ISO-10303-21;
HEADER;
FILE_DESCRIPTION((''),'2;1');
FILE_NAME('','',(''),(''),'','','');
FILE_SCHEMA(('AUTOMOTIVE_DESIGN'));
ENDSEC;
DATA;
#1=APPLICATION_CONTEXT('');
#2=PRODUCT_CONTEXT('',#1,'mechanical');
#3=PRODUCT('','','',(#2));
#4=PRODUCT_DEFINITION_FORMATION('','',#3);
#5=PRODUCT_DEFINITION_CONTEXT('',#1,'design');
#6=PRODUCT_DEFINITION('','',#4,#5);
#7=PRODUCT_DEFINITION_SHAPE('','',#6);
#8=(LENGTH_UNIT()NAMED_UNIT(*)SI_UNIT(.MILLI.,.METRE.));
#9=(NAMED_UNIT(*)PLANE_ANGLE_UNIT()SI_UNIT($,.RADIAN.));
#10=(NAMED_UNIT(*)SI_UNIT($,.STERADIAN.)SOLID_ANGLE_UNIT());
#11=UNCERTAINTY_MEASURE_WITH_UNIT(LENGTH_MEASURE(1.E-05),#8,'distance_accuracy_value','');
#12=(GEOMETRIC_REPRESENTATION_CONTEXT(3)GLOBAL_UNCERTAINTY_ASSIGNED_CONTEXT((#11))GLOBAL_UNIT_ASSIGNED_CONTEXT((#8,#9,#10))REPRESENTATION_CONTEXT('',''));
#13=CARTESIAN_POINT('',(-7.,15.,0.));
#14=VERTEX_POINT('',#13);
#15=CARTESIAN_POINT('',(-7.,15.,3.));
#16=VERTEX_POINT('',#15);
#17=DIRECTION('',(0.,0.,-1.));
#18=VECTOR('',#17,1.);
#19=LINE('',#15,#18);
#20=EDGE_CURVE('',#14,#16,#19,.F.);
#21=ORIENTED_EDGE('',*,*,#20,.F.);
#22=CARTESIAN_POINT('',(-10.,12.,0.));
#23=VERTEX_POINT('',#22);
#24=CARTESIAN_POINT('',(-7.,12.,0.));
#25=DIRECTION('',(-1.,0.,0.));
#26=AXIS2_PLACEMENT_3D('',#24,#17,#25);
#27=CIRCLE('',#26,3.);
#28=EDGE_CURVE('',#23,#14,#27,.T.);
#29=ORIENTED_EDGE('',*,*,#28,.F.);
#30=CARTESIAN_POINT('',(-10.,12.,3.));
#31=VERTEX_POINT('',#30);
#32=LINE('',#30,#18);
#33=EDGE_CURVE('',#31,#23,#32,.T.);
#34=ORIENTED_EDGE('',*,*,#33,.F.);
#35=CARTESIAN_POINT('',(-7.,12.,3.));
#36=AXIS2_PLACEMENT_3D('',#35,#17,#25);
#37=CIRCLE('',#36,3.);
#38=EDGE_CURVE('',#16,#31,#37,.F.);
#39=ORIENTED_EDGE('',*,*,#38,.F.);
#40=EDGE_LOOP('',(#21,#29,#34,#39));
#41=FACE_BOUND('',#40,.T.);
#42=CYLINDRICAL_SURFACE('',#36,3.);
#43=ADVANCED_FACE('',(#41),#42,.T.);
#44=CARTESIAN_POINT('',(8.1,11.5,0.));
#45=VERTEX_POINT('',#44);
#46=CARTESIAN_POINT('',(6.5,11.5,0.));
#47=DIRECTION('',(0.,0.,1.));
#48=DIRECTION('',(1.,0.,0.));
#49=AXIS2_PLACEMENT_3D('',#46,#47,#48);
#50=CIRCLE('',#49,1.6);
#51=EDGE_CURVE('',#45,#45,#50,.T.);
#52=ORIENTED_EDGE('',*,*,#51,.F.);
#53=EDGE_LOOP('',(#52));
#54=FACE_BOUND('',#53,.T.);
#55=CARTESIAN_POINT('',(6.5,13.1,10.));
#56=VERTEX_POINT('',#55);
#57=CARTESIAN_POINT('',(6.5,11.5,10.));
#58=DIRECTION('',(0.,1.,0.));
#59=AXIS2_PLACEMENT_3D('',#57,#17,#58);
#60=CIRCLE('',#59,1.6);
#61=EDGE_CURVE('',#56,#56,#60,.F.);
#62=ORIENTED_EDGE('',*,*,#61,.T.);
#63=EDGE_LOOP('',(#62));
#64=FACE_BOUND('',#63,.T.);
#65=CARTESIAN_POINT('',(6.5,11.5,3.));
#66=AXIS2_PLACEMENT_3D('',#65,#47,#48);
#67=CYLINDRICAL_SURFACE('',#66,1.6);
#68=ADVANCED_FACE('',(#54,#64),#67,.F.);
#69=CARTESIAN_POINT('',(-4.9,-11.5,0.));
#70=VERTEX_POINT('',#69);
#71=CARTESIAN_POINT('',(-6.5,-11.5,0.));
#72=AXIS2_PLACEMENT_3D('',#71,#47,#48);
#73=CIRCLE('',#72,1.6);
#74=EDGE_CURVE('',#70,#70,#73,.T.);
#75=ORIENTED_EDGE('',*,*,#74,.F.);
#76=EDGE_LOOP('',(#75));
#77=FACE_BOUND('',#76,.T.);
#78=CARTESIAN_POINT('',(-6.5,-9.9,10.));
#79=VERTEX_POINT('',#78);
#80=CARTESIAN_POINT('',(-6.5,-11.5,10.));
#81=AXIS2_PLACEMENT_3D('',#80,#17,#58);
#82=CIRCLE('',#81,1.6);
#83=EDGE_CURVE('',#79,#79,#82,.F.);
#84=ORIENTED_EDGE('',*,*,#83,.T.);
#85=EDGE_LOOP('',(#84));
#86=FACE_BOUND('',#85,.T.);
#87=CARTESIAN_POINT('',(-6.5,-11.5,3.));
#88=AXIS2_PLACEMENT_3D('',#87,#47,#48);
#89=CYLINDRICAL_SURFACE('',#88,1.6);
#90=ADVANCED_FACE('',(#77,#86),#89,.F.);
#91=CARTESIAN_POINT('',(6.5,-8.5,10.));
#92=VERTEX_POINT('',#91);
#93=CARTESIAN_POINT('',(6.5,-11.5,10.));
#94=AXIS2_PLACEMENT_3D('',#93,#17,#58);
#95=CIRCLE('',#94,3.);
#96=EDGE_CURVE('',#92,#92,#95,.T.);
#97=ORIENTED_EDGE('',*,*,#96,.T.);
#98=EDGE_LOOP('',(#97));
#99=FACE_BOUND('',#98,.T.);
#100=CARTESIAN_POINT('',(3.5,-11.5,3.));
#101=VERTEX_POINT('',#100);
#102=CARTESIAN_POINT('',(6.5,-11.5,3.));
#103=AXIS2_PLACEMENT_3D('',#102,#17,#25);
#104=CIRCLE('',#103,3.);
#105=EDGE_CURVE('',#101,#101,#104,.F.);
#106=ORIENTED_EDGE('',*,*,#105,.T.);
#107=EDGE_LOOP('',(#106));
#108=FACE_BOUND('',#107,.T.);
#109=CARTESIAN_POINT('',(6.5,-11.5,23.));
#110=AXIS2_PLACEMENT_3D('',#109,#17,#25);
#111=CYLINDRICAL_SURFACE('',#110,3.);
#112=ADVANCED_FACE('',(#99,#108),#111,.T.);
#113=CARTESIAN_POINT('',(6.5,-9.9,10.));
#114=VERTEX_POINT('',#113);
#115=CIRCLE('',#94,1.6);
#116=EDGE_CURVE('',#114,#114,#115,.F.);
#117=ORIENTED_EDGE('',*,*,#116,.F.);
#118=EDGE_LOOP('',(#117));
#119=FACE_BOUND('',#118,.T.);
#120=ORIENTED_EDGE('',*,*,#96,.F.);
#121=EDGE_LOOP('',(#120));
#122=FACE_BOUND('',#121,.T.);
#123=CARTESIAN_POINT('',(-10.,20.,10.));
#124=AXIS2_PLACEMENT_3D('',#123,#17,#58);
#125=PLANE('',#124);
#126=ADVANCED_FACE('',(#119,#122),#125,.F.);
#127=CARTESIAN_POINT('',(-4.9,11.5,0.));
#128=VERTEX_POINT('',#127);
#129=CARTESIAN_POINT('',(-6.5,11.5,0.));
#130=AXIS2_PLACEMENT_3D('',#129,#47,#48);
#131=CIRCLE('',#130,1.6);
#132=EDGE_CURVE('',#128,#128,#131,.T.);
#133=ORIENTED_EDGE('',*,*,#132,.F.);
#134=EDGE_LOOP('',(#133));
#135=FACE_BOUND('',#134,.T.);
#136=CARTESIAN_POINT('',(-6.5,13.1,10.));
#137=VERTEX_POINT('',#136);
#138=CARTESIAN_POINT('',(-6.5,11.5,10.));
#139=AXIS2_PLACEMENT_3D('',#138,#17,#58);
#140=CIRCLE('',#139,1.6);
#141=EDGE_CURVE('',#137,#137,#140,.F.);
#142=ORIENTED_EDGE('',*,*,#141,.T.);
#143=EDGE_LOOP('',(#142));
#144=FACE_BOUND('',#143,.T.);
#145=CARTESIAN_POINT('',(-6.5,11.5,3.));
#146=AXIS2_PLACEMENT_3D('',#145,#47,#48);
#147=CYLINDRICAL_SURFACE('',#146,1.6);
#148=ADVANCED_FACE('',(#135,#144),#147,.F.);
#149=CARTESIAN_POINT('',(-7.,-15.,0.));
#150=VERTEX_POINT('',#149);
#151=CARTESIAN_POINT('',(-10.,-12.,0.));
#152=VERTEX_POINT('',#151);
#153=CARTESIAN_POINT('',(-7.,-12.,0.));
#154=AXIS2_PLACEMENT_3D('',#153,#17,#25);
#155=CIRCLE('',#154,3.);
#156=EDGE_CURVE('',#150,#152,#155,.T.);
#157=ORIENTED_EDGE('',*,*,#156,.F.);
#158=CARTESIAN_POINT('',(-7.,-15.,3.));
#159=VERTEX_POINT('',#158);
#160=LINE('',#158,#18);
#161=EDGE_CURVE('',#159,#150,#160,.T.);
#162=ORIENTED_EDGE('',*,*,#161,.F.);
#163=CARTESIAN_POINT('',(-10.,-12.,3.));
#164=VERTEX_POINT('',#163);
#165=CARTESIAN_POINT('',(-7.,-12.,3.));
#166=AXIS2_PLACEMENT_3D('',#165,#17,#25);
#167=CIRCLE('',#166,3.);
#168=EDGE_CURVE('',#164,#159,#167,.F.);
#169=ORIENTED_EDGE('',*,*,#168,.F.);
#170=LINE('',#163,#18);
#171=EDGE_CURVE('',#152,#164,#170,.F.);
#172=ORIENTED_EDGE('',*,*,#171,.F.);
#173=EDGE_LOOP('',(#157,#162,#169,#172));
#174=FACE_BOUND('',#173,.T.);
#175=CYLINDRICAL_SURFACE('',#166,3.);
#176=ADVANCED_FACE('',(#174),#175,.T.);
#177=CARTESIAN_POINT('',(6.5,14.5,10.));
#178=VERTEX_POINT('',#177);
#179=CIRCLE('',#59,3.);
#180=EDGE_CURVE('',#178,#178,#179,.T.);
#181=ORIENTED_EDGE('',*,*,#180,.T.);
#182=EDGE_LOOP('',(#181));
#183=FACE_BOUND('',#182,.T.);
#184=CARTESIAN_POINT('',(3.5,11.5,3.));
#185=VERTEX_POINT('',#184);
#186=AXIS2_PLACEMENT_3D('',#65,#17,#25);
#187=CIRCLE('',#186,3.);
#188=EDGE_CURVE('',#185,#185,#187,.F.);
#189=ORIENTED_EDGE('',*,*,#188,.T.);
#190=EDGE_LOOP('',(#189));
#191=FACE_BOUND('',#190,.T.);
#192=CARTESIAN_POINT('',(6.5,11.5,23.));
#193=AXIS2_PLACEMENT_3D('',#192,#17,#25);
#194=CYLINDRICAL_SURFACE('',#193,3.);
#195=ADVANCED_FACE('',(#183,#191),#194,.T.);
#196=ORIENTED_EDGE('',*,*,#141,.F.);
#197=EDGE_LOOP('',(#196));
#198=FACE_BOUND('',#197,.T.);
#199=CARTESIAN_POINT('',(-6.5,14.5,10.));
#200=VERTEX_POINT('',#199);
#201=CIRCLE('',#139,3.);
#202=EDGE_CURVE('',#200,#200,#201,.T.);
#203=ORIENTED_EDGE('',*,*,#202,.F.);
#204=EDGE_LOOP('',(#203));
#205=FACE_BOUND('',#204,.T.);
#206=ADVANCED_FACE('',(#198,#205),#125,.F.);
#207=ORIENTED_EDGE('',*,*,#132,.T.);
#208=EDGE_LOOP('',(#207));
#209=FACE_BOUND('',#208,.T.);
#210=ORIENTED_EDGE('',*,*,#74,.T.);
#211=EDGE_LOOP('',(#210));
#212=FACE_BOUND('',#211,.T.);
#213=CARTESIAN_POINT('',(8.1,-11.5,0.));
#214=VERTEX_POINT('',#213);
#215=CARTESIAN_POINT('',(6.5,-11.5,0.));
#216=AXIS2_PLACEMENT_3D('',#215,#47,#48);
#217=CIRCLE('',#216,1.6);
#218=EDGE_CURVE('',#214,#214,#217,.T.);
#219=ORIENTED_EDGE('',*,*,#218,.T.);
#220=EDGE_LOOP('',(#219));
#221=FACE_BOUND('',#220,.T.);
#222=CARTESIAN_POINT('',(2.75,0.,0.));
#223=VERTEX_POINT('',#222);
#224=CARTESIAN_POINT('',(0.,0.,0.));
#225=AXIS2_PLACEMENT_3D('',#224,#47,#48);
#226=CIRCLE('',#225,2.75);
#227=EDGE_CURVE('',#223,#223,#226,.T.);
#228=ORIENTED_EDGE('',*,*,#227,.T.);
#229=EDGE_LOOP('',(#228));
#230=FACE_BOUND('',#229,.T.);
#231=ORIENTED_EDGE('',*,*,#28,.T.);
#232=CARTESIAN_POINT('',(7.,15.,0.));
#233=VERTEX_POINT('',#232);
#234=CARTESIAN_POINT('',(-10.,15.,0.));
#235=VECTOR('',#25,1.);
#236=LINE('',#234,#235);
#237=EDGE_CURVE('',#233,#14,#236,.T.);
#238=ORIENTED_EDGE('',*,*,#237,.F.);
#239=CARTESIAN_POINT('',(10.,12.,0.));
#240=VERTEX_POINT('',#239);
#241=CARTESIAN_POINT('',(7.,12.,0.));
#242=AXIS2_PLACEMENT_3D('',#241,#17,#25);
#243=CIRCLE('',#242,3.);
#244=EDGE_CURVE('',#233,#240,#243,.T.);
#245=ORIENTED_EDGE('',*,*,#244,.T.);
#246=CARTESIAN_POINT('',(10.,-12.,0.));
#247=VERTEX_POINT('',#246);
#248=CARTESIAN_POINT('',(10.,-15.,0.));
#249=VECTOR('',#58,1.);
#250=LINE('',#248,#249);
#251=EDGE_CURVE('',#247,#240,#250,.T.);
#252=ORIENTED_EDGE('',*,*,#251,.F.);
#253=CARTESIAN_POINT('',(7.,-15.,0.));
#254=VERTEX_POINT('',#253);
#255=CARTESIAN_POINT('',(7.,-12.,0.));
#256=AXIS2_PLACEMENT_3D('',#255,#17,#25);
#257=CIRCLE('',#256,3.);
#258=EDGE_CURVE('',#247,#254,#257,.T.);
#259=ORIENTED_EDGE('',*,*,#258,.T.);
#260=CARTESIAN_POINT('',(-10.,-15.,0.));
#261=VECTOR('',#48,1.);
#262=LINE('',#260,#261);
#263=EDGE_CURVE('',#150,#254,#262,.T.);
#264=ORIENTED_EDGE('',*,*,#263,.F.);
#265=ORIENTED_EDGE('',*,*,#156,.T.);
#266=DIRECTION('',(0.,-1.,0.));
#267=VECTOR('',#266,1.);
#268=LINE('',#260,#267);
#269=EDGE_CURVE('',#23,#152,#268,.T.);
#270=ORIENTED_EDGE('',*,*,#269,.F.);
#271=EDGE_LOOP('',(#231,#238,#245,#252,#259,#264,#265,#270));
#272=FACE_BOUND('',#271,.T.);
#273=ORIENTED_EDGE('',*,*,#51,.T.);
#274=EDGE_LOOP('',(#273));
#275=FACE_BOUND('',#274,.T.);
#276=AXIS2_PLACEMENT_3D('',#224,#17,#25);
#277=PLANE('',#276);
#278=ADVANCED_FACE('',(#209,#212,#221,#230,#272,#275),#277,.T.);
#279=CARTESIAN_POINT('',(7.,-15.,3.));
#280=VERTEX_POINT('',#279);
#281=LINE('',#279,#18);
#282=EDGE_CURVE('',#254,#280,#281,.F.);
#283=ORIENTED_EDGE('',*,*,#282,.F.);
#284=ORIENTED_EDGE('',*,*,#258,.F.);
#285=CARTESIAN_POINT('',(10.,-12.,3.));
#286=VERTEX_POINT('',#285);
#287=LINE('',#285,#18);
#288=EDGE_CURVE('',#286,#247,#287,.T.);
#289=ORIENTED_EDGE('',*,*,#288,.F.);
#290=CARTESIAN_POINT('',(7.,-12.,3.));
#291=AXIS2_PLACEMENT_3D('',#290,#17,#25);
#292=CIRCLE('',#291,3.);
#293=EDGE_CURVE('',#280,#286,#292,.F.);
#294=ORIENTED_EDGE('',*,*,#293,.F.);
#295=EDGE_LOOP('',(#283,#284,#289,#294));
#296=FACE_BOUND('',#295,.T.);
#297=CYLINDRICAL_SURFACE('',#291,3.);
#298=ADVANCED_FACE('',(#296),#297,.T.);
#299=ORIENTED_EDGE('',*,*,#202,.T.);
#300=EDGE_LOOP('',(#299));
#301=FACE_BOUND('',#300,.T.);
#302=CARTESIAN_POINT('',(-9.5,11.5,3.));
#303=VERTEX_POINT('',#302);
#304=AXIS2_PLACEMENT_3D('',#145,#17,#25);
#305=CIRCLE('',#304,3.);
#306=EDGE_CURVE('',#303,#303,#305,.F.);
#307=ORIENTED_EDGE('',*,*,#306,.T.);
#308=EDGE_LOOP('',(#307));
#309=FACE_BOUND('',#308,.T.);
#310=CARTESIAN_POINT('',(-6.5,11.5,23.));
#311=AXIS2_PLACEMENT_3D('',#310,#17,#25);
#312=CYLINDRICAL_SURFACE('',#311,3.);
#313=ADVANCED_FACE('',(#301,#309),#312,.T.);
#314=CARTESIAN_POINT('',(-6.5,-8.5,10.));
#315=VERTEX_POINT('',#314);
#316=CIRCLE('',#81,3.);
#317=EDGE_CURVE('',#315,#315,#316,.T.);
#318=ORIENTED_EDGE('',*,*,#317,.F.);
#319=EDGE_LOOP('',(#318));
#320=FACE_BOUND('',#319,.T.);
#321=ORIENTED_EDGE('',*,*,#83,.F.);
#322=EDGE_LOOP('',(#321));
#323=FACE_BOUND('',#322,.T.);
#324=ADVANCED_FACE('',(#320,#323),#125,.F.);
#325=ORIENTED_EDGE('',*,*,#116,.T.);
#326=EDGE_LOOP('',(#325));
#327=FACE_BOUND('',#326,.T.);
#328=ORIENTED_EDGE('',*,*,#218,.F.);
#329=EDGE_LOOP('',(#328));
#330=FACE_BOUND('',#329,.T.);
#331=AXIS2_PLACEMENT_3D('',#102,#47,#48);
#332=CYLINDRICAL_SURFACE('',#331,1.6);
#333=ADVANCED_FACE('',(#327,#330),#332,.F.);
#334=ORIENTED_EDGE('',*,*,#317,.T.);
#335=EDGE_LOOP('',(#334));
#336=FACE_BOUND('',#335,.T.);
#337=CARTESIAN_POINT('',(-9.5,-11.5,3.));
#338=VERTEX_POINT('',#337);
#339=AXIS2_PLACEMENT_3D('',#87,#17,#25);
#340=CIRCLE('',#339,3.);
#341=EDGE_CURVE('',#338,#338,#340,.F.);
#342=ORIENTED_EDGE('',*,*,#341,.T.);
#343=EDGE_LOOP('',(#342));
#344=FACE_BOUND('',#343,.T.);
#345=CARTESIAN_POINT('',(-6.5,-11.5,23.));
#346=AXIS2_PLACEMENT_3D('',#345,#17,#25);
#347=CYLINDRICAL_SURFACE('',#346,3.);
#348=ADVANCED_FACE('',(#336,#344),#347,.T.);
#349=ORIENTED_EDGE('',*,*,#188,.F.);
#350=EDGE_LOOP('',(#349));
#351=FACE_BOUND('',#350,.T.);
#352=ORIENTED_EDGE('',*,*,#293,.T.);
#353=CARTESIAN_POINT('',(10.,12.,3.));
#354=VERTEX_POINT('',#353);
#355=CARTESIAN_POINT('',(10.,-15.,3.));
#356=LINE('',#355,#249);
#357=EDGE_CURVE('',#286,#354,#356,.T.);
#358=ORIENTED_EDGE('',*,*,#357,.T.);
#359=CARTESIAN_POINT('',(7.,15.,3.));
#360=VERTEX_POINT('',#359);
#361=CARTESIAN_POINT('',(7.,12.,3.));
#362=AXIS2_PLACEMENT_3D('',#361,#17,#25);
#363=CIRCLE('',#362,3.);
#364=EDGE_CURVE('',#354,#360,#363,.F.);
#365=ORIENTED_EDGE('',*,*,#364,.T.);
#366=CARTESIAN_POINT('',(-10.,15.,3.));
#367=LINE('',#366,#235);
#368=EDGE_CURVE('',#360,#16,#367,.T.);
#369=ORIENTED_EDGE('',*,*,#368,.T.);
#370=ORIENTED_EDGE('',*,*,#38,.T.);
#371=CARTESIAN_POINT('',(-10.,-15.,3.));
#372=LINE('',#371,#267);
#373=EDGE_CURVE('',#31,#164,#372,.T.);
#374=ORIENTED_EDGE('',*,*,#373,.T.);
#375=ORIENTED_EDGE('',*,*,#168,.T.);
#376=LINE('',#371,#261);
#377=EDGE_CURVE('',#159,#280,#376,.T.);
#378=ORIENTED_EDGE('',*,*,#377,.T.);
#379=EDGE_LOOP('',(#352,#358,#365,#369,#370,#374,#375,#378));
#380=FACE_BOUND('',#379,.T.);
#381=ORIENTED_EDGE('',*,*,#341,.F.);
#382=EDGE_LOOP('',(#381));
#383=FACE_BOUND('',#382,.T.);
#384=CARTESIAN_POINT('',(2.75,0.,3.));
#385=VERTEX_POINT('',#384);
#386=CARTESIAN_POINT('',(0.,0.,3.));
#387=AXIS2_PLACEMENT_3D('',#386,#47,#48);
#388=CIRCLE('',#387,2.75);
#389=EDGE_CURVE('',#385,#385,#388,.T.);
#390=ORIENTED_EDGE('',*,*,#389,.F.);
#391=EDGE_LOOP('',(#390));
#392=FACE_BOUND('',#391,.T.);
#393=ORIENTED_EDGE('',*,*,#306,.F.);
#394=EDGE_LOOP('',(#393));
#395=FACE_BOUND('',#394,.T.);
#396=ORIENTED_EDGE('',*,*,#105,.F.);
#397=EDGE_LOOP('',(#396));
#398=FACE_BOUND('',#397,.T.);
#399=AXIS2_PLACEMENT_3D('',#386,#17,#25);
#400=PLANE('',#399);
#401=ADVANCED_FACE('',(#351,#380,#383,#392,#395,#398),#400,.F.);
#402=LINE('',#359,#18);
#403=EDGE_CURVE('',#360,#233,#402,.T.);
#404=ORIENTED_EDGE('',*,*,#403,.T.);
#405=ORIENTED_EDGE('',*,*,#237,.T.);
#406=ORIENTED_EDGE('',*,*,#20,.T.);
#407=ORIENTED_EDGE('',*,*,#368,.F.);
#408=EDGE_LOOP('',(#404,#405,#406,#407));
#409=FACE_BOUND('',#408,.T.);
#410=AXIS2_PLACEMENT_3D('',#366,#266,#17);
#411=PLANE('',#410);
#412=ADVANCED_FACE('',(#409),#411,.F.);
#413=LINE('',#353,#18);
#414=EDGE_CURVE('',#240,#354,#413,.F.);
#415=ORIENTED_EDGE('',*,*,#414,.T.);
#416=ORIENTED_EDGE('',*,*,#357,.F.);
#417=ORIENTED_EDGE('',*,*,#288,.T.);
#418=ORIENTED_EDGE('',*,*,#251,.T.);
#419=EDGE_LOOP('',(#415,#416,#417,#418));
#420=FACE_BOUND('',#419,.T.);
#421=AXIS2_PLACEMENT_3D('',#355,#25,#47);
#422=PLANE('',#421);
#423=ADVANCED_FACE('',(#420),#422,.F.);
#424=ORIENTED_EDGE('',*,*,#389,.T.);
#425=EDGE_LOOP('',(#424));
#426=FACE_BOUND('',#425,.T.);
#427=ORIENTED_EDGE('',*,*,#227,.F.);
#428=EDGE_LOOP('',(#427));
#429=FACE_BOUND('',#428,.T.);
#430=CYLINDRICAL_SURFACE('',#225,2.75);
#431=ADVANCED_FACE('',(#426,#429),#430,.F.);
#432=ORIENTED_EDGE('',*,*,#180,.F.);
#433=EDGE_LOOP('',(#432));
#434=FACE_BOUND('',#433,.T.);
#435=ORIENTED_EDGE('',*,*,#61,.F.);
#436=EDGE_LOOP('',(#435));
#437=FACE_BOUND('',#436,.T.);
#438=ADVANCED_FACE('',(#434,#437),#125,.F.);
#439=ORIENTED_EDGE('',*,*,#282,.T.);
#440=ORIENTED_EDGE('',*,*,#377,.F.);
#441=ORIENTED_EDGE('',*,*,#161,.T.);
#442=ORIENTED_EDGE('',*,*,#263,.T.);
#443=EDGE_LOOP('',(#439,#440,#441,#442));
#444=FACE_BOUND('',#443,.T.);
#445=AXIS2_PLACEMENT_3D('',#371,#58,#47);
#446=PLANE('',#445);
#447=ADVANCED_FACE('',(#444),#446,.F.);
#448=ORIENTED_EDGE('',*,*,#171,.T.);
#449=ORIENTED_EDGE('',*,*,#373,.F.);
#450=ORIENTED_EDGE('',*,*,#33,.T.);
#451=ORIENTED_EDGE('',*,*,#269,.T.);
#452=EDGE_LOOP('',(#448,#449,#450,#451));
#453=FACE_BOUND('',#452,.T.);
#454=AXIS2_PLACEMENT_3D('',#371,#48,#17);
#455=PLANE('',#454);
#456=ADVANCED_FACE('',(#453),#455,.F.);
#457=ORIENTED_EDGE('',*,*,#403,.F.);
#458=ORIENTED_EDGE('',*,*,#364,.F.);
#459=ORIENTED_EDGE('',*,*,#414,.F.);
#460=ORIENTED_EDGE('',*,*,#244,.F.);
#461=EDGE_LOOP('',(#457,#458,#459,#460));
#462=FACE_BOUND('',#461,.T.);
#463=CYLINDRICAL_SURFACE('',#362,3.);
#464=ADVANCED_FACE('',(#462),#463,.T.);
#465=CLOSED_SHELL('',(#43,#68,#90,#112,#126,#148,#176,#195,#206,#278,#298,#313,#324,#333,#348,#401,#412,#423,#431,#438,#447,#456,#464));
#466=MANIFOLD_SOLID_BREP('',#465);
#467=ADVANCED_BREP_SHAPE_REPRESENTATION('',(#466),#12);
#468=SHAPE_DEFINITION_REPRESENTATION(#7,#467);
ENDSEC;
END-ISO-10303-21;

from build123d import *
from build123d.topology import SkipClean

# Parameters (mm, degrees)
SKETCH1_W                  = 20
SKETCH1_H                  = 30
BOSS_EXTRUDE1_DEPTH        = 3
F_3_2_3_2_DIAMETER_HOLE1_D = 3.2
SKETCH5_R                  = 3
SKETCH5_R_2                = 1.6
BOSS_EXTRUDE2_DEPTH        = 20
SKETCH6_R                  = 2.75
CUT_EXTRUDE1_DEPTH         = 27.925824036
SKETCH7_W                  = 20
SKETCH7_H                  = 40
CUT_EXTRUDE2_DEPTH         = 34.970575503
FILLET1_R                  = 3


with BuildPart() as part:
    # Sketch1 → Boss-Extrude1 (new body)
    with BuildSketch(Plane.XY):
        Rectangle(SKETCH1_W, SKETCH1_H)
    extrude(amount=BOSS_EXTRUDE1_DEPTH)

    # Ø3.2 (3.2) Diameter Hole1 (through all)
    with Locations(Plane.XY.offset(3)):
        with Locations((-6.5, 11.5), (6.5, 11.5), (6.5, -11.5), (-6.5, -11.5)):
            Hole(F_3_2_3_2_DIAMETER_HOLE1_D / 2)

    # Sketch5 → Boss-Extrude2 (add)
    # profile 1 of 4: a face of its own
    with SkipClean():  # the faces are left unmerged after this step: merging them gives an invalid solid
        with BuildSketch(Plane.XY.offset(3)):
            with Locations((-6.5, 11.5)):
                Circle(SKETCH5_R)
            with Locations((-6.5, 11.5)):
                Circle(SKETCH5_R_2, mode=Mode.SUBTRACT)
        # profile 2 of 4: a face of its own
        with BuildSketch(Plane.XY.offset(3)):
            with Locations((6.5, 11.5)):
                Circle(SKETCH5_R)
            with Locations((6.5, 11.5)):
                Circle(SKETCH5_R_2, mode=Mode.SUBTRACT)
        # profile 3 of 4: a face of its own
        with BuildSketch(Plane.XY.offset(3)):
            with Locations((6.5, -11.5)):
                Circle(SKETCH5_R)
            with Locations((6.5, -11.5)):
                Circle(SKETCH5_R_2, mode=Mode.SUBTRACT)
        # profile 4 of 4: a face of its own
        with BuildSketch(Plane.XY.offset(3)):
            with Locations((-6.5, -11.5)):
                Circle(SKETCH5_R)
            with Locations((-6.5, -11.5)):
                Circle(SKETCH5_R_2, mode=Mode.SUBTRACT)
        extrude(amount=BOSS_EXTRUDE2_DEPTH)
    add(part.part.scale(1), mode=Mode.REPLACE)  # the faces are merged on a copy

    # Sketch6 → Cut-Extrude1 (cut, through all)
    with BuildSketch(Plane.XY.offset(3)):
        Circle(SKETCH6_R)
    extrude(amount=-CUT_EXTRUDE1_DEPTH, mode=Mode.SUBTRACT)

    # Sketch7 → Cut-Extrude2 (cut, through all)
    with BuildSketch(Plane(origin=(10, 0, 0), x_dir=(0, 0, -1), z_dir=(1, 0, 0))):
        with Locations((-20, 0)):
            Rectangle(SKETCH7_W, SKETCH7_H)
    extrude(amount=-CUT_EXTRUDE2_DEPTH, mode=Mode.SUBTRACT)

    # Fillet1
    fillet1_edges = [part.edges().sort_by_distance(p)[0] for p in [
        (10, -15, 1.5),
        (-10, -15, 1.5),
        (-10, 15, 1.5),
        (10, 15, 1.5),
    ]]
    fillet(fillet1_edges, radius=FILLET1_R)


solid = part.part
